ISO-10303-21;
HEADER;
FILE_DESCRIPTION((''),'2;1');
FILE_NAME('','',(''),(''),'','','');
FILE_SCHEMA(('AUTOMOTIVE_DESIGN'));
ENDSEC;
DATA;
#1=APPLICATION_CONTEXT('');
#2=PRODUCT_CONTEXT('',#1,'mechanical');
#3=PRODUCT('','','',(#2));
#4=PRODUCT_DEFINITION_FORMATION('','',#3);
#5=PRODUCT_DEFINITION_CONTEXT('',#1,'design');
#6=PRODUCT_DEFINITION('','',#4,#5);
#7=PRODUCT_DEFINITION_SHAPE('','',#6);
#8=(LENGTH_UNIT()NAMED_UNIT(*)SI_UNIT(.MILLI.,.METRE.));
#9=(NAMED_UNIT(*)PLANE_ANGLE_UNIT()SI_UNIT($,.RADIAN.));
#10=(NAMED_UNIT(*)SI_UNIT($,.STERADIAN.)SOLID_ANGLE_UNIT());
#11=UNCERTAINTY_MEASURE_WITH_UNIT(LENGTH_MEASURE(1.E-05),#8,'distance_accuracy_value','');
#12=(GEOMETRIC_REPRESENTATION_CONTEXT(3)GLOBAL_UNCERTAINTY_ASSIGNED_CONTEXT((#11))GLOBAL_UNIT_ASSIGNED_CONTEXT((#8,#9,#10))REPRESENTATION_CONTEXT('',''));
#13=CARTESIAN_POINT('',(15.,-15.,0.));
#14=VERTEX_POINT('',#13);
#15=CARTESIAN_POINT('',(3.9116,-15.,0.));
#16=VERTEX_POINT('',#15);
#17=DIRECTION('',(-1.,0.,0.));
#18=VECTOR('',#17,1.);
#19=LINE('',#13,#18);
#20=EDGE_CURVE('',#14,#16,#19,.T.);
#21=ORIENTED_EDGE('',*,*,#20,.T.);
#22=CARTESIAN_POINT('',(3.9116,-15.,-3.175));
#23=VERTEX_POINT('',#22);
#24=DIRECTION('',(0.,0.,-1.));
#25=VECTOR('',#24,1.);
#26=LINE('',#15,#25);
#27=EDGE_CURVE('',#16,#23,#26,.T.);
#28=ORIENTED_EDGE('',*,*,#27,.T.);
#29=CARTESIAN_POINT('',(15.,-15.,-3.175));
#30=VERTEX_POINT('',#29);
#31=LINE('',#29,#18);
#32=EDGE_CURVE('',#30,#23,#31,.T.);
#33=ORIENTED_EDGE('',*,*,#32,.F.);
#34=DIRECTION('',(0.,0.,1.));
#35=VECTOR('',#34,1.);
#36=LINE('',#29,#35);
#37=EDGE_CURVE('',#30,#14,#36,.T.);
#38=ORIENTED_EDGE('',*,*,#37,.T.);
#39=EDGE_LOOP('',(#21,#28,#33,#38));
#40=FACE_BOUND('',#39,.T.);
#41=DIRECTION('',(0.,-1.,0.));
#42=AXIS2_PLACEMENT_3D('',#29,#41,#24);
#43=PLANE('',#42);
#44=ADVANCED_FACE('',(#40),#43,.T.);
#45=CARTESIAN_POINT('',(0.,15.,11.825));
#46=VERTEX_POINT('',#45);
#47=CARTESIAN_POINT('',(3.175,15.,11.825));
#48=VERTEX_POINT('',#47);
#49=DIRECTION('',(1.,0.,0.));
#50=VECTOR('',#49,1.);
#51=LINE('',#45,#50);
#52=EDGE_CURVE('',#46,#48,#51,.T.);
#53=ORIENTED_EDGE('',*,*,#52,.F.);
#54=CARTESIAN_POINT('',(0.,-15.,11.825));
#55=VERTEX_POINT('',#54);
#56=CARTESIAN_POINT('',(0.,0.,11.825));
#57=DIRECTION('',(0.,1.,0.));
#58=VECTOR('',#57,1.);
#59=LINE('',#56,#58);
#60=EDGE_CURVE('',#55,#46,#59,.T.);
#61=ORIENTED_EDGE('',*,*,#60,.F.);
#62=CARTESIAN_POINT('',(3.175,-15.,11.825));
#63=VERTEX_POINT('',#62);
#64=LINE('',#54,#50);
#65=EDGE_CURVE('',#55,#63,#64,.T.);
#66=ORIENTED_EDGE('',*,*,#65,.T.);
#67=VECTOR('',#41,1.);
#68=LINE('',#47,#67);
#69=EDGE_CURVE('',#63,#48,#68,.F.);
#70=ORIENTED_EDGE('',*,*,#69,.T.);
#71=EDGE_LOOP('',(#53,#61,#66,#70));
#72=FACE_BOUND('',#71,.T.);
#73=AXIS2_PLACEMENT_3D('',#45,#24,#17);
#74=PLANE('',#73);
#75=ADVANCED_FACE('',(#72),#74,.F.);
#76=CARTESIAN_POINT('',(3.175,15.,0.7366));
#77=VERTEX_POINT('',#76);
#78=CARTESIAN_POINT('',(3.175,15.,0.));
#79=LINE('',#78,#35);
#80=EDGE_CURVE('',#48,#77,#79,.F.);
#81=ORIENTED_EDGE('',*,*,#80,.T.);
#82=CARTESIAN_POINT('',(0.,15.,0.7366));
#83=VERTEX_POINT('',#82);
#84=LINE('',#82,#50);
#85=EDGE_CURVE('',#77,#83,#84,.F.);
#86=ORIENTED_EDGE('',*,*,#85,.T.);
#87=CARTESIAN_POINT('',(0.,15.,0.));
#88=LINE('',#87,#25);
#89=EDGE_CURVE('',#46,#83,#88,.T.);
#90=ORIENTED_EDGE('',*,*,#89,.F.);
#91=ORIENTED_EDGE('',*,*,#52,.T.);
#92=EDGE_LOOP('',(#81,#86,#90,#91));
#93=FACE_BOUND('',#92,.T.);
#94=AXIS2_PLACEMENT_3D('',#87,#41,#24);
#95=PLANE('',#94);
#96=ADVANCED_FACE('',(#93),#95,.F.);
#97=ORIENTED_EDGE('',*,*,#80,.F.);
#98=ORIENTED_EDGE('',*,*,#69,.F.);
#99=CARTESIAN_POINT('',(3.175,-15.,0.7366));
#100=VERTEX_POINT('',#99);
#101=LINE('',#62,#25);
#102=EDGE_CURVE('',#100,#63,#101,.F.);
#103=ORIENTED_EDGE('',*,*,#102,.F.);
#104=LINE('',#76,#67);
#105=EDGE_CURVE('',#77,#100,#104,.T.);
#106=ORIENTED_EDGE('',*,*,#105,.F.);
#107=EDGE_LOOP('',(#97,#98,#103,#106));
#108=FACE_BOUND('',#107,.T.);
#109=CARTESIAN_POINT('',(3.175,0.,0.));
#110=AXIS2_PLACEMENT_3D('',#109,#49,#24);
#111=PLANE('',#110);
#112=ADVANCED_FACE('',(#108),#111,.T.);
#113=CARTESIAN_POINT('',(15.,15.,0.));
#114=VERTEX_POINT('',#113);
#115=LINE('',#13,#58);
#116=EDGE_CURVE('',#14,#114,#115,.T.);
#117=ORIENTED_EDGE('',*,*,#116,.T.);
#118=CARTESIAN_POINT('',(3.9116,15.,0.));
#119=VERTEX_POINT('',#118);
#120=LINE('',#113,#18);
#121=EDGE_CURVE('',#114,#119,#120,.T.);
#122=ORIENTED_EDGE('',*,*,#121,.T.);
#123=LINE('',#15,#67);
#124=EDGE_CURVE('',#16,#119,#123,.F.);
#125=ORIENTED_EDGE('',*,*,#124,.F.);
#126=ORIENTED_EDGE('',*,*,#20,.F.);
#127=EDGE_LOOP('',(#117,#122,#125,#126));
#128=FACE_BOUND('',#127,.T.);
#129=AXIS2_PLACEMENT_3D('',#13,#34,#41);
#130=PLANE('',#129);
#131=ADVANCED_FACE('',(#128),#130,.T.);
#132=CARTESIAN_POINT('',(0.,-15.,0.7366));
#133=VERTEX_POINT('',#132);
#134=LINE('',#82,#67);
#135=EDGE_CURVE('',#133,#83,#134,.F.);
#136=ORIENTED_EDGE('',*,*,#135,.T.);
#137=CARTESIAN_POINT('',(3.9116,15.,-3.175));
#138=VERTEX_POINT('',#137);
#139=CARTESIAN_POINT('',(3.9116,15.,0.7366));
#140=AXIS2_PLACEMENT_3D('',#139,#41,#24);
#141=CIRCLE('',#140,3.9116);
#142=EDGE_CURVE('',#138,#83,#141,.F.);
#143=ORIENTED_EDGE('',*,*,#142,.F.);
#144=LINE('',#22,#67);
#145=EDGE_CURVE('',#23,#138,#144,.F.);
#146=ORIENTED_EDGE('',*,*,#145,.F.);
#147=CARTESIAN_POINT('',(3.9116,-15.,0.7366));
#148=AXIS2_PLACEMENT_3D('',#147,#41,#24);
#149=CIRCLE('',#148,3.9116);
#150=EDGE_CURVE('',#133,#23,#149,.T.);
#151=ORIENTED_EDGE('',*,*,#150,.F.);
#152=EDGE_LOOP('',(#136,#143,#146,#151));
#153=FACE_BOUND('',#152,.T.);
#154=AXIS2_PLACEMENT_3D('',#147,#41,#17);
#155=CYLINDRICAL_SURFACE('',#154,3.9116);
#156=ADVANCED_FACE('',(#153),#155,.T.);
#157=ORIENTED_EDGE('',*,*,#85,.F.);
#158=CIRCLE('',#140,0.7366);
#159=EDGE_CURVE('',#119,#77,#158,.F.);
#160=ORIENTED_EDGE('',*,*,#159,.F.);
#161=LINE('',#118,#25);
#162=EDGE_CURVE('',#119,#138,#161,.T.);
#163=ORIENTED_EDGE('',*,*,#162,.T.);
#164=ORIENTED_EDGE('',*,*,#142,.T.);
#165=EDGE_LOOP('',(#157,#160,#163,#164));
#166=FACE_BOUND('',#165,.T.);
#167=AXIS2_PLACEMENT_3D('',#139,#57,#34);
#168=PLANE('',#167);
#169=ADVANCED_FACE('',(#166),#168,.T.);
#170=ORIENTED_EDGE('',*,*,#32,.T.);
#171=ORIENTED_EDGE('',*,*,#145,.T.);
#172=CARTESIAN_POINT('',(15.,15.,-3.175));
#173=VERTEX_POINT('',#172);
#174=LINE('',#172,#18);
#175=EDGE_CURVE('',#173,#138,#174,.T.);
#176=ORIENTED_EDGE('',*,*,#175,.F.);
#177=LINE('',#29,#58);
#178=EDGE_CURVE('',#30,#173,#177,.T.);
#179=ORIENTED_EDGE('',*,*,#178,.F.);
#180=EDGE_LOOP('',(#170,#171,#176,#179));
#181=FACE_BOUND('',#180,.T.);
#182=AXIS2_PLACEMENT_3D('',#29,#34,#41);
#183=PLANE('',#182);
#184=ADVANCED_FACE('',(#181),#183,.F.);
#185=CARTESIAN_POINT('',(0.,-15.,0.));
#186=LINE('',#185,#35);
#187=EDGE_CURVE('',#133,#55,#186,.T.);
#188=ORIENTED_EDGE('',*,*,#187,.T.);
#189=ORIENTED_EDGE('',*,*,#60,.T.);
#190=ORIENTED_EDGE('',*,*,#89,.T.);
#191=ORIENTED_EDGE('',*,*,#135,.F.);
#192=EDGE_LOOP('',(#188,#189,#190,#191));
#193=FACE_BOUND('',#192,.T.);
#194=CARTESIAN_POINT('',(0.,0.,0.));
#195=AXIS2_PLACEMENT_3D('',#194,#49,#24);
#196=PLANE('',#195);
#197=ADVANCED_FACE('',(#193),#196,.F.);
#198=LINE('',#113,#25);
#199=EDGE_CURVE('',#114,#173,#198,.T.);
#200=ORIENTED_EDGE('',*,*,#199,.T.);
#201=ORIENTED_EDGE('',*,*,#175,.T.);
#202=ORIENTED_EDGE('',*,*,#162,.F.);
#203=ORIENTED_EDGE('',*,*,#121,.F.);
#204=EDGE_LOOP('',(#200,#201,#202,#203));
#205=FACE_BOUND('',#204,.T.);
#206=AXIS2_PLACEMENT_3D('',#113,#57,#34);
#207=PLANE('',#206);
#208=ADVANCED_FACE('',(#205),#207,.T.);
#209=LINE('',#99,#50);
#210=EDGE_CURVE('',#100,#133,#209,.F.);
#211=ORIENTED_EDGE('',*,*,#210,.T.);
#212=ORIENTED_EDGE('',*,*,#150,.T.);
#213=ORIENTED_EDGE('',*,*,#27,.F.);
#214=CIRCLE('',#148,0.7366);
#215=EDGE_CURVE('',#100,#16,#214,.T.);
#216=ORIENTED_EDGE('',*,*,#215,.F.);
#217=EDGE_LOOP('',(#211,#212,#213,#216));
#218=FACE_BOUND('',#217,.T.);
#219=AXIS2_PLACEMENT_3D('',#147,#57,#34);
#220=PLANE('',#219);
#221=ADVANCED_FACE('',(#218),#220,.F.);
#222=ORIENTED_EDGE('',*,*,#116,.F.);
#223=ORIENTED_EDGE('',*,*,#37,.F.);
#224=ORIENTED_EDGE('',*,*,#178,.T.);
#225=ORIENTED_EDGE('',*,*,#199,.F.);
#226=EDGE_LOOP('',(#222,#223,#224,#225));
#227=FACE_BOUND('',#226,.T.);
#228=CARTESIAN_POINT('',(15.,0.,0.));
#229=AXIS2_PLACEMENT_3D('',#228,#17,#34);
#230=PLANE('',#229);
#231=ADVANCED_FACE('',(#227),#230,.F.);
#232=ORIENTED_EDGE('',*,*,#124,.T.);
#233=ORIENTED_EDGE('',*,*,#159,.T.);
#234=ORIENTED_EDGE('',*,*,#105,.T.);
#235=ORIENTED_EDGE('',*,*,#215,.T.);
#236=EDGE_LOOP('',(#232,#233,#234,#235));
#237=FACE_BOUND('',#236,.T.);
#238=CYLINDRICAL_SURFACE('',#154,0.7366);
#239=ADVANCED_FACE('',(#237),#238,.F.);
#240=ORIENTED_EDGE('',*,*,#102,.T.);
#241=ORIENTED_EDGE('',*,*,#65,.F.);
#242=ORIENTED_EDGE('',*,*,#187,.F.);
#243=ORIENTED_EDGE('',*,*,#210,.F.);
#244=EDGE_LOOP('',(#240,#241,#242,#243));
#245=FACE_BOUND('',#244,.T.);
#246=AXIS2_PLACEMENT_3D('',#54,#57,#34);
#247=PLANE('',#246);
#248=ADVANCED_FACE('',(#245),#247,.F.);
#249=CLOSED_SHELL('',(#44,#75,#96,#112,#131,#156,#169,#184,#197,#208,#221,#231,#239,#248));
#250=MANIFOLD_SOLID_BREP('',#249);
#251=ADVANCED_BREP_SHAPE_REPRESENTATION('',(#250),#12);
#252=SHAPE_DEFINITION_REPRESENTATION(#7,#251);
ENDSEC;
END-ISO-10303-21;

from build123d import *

# Parameters (mm, degrees)
SKETCH1_W                    = 3.175
SKETCH1_H                    = 30
BASE_FLANGE1_DEPTH           = 15
EDGE_FLANGE1_STRIP_W         = 14.1732
EDGE_FLANGE1_STRIP_H         = 3.175
EDGE_FLANGE1_STRIP_CUT_DEPTH = 30
EDGE_FLANGE1_DEPTH           = 30


# Sheet-metal steps are written as plain solids
with BuildPart() as part:
    # Sketch1 → Base-Flange1 (new body)
    with BuildSketch(Plane(origin=(0, 0, 0), x_dir=(0, 0, -1), z_dir=(1, 0, 0))):
        with Locations((1.5875, 0)):
            Rectangle(SKETCH1_W, SKETCH1_H)
    extrude(amount=BASE_FLANGE1_DEPTH)

    # Edge-Flange1 strip (across the edge) → Edge-Flange1 strip cut (cut)
    with BuildSketch(Plane.XZ.offset(-15)):
        with Locations((-3.175, -1.5875)):
            Rectangle(EDGE_FLANGE1_STRIP_W, EDGE_FLANGE1_STRIP_H)
    extrude(amount=EDGE_FLANGE1_STRIP_CUT_DEPTH, mode=Mode.SUBTRACT)

    # Edge-Flange1 section (across the edge) → Edge-Flange1 (add)
    with BuildSketch(Plane.XZ.offset(-15)):
        with BuildLine():
            Line((0, 0.7366), (0, 11.825))
            Line((0, 11.825), (3.175, 11.825))
            Line((3.175, 11.825), (3.175, 0.7366))
            ThreePointArc((3.175, 0.7366), (3.390745145, 0.215745145), (3.9116, 0))
            Line((3.9116, 0), (3.9116, -3.175))
            ThreePointArc((3.9116, -3.175), (1.145681115, -2.029318885), (0, 0.7366))
        make_face()
    extrude(amount=EDGE_FLANGE1_DEPTH)


solid = part.part
